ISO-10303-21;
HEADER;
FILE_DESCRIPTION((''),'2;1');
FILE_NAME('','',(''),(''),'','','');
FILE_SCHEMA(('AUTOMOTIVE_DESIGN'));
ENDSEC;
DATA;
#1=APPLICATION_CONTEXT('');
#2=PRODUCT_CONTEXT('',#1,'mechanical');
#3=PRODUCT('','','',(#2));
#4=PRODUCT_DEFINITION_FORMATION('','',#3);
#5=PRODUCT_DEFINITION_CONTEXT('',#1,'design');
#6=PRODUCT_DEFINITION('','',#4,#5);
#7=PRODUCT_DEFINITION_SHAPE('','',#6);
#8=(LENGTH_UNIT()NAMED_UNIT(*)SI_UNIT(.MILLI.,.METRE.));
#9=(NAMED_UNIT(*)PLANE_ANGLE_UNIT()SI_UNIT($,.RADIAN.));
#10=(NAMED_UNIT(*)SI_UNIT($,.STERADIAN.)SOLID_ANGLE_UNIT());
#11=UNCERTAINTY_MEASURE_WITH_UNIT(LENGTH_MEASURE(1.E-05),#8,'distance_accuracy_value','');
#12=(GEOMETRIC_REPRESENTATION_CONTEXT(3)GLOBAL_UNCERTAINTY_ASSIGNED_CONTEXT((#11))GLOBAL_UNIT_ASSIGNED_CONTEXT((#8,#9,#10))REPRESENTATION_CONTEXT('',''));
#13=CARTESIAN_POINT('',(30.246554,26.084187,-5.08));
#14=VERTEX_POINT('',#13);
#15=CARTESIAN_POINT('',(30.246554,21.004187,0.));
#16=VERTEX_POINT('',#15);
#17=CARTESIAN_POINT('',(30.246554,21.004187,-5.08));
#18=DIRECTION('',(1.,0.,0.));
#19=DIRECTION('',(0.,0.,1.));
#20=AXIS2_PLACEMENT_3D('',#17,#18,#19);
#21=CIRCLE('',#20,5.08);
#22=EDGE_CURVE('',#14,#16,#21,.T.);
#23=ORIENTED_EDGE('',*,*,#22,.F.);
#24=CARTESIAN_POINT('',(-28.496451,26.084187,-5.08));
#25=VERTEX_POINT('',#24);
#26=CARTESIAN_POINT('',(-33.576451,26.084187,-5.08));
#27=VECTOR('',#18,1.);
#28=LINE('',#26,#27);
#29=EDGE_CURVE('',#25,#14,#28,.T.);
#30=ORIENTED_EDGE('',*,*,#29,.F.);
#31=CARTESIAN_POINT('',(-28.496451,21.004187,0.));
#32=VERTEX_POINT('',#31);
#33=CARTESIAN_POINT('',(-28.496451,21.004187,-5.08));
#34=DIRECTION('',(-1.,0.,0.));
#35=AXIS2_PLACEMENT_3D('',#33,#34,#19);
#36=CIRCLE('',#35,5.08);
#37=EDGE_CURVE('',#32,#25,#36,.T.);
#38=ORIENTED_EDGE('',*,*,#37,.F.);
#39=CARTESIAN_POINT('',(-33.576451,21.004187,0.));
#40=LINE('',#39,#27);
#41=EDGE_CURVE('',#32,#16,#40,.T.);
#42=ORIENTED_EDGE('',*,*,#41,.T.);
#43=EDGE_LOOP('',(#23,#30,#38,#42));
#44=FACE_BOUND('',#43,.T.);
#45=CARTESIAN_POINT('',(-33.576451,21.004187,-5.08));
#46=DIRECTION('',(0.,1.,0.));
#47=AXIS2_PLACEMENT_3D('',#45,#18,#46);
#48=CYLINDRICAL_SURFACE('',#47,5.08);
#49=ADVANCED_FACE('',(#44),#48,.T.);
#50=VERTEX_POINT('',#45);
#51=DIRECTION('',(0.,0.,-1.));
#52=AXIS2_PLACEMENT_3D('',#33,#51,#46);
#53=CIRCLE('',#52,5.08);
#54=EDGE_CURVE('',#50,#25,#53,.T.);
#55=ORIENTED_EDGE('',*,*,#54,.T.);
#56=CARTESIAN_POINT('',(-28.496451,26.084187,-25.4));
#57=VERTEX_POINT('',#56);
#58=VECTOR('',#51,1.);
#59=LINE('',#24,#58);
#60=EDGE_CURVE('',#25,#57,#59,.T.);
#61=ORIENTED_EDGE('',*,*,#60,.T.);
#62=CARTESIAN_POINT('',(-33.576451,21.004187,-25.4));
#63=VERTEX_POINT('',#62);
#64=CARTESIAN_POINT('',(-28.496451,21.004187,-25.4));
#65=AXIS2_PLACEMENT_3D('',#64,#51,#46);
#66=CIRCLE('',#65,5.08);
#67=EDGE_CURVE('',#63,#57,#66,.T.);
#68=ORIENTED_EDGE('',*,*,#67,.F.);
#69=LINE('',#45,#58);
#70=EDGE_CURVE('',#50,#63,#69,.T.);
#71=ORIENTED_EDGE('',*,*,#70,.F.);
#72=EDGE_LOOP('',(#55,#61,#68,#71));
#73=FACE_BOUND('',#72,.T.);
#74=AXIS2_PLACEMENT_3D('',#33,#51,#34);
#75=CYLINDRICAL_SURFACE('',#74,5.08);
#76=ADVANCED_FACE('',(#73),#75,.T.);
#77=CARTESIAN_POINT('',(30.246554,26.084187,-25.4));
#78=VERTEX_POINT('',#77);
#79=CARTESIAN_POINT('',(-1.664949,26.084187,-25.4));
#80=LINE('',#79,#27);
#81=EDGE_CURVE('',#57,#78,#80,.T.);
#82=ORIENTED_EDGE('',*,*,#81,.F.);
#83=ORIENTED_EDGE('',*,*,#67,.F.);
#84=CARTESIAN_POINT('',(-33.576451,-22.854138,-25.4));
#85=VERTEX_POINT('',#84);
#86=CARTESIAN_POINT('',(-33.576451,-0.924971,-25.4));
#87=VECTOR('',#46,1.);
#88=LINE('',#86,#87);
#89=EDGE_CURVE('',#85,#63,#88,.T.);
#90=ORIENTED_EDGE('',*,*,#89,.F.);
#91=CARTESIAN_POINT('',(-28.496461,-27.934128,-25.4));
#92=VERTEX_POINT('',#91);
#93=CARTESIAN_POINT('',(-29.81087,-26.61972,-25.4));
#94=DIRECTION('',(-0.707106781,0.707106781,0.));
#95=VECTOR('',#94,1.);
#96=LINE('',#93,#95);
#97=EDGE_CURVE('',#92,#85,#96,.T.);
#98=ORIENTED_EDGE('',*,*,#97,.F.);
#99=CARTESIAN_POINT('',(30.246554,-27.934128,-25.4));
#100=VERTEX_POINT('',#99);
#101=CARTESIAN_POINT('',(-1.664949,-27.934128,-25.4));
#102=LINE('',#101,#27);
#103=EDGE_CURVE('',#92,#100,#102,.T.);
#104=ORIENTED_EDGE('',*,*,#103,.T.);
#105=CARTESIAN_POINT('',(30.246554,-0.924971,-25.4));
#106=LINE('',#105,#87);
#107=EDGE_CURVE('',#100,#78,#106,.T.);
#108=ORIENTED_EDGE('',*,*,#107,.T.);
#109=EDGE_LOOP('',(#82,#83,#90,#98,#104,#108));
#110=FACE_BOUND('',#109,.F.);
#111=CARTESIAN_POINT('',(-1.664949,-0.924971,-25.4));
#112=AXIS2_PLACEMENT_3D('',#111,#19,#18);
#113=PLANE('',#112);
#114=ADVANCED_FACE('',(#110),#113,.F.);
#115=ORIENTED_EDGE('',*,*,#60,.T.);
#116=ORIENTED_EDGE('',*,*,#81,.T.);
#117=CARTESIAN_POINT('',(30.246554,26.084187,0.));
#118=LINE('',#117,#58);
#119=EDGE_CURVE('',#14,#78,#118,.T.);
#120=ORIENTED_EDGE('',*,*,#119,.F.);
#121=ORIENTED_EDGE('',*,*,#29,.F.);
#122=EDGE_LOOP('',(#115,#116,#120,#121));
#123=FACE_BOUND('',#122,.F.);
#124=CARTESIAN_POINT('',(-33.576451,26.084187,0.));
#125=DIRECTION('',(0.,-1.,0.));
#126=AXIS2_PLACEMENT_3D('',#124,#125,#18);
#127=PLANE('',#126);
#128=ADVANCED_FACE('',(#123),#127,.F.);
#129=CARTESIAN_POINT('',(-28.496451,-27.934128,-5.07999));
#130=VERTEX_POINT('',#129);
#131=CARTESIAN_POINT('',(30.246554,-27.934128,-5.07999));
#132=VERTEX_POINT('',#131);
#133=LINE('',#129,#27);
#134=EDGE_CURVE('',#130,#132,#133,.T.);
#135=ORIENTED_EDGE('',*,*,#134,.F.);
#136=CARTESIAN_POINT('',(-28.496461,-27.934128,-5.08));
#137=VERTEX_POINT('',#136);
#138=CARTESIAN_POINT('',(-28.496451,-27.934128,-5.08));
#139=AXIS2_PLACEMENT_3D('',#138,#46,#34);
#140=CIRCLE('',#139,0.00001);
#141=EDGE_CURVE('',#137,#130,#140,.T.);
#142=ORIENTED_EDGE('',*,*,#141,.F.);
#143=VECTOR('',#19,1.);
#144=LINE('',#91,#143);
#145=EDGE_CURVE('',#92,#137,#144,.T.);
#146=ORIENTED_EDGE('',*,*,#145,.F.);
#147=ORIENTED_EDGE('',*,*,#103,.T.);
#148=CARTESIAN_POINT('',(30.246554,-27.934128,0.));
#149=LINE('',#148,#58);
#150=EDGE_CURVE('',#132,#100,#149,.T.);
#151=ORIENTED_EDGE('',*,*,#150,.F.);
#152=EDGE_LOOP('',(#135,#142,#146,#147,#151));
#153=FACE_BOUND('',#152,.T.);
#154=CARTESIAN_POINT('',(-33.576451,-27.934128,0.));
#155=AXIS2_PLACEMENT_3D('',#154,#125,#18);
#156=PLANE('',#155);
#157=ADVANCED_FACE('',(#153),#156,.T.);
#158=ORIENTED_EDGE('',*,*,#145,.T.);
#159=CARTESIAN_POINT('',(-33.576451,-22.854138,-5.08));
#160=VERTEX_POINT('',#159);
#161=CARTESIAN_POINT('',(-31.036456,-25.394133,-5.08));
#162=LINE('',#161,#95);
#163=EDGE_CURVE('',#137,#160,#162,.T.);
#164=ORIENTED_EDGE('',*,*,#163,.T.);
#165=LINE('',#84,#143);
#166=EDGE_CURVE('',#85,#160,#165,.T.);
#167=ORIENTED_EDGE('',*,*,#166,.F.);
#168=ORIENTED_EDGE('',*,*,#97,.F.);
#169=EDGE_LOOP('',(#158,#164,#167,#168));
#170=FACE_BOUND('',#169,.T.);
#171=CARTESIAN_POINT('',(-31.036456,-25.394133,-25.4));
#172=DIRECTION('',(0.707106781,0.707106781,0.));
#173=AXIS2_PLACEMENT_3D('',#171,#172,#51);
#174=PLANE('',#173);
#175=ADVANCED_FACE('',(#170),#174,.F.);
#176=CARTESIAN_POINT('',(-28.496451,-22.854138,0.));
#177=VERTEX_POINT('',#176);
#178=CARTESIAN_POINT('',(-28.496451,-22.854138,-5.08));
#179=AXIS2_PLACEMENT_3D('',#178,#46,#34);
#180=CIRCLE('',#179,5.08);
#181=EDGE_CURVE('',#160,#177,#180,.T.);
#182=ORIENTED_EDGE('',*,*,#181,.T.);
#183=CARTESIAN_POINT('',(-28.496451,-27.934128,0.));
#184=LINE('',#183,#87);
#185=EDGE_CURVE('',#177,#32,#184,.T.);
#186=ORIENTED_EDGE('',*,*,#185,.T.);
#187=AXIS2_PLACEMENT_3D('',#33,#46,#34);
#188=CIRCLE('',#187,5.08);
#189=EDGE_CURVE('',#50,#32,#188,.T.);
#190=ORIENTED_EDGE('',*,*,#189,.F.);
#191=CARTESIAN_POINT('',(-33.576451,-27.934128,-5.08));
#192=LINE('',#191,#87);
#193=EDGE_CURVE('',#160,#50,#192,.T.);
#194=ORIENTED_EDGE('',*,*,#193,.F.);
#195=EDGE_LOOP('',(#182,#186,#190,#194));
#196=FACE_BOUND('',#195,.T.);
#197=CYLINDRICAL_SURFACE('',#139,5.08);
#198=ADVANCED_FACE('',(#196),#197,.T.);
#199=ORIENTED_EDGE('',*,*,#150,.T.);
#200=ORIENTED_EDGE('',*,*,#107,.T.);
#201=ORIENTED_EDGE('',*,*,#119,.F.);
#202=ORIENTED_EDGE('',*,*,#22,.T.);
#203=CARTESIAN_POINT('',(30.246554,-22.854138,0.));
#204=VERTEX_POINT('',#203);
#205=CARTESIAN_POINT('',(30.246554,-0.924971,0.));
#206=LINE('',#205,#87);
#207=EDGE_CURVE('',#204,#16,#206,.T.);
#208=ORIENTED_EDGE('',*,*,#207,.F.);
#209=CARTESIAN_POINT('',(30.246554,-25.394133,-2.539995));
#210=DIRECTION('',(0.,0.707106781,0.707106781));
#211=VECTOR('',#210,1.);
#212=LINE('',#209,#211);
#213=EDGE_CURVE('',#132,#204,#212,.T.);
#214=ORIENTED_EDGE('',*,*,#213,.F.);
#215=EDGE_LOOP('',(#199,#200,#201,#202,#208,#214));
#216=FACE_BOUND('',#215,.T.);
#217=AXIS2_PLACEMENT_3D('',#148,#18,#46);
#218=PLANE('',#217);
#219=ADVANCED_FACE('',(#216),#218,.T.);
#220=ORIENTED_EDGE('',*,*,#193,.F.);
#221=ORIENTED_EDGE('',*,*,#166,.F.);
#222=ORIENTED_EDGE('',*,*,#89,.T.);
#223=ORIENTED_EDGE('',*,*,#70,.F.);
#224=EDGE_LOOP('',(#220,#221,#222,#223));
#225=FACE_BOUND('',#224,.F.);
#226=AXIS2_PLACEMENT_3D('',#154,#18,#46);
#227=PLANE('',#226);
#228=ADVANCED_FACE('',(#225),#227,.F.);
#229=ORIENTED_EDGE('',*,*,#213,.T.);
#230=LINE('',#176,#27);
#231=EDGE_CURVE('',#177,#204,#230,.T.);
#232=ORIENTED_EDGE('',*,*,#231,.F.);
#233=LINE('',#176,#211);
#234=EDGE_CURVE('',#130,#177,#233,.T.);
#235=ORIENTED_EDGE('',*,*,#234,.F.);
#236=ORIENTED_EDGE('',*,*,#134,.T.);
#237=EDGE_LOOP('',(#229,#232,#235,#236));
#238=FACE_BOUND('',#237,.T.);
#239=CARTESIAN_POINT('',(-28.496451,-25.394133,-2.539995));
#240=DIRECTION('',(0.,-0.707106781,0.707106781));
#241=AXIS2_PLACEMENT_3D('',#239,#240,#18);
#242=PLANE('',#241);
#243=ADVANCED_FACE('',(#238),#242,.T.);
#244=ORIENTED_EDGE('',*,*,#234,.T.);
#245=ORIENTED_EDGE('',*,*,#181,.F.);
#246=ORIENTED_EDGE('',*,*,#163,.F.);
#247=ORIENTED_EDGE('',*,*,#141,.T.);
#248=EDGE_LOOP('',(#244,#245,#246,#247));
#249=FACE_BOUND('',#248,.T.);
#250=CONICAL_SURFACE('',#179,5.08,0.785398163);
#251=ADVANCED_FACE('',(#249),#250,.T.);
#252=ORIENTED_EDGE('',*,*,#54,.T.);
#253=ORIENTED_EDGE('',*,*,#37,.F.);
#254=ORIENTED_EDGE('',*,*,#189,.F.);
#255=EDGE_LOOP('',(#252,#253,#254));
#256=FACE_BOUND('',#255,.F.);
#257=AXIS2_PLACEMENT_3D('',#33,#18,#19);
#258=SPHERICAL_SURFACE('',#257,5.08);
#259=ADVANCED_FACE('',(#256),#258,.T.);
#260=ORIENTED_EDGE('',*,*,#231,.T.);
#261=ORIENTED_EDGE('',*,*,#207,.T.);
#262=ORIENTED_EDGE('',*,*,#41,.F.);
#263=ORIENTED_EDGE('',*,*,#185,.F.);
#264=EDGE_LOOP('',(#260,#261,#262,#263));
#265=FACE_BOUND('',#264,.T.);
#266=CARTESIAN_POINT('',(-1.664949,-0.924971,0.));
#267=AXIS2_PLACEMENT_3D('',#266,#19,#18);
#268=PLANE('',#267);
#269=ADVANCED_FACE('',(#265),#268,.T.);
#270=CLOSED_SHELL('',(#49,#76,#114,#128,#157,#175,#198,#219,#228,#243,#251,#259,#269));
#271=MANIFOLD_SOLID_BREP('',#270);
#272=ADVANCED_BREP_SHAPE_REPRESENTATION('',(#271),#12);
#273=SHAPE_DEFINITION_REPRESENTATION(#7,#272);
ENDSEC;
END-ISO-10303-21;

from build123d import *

# Parameters (mm, degrees)
F0_W     = 63.8230051845
F0_H     = 54.0183149278
F1_DEPTH = 25.4
F2_R     = 5.08
F3_R     = 5.08
F4_SIZE  = 5.07999


# Not quite as in the source:
# - a fillet or chamfer is up to 0.001 mm smaller than in the source, because OpenCascade refuses the exact size


with BuildPart() as f1:
    # F0 (on Top) → F1 (new body)
    with BuildSketch(Plane.XY):
        with Locations((-1.6649486497, -0.9249709547)):
            Rectangle(F0_W, F0_H)
    extrude(amount=-F1_DEPTH)

    # F2
    f2_edges = [f1.edges().sort_by_distance(p)[0] for p in [
        (-1.664949, 26.084187, 0),
    ]]
    fillet(f2_edges, radius=F2_R)

    # F3
    f3_edges = [f1.edges().sort_by_distance(p)[0] for p in [
        (-33.576451, -3.464971, 0),
    ]]
    fillet(f3_edges, radius=F3_R)

    # F4 (size 5.08 in the source; OpenCascade refuses exactly that, so slightly less here)
    f4_edges = [f1.edges().sort_by_distance(p)[0] for p in [
        (0.875051, -27.934128, 0),
    ]]
    chamfer(f4_edges, length=F4_SIZE)


solid = f1.part
